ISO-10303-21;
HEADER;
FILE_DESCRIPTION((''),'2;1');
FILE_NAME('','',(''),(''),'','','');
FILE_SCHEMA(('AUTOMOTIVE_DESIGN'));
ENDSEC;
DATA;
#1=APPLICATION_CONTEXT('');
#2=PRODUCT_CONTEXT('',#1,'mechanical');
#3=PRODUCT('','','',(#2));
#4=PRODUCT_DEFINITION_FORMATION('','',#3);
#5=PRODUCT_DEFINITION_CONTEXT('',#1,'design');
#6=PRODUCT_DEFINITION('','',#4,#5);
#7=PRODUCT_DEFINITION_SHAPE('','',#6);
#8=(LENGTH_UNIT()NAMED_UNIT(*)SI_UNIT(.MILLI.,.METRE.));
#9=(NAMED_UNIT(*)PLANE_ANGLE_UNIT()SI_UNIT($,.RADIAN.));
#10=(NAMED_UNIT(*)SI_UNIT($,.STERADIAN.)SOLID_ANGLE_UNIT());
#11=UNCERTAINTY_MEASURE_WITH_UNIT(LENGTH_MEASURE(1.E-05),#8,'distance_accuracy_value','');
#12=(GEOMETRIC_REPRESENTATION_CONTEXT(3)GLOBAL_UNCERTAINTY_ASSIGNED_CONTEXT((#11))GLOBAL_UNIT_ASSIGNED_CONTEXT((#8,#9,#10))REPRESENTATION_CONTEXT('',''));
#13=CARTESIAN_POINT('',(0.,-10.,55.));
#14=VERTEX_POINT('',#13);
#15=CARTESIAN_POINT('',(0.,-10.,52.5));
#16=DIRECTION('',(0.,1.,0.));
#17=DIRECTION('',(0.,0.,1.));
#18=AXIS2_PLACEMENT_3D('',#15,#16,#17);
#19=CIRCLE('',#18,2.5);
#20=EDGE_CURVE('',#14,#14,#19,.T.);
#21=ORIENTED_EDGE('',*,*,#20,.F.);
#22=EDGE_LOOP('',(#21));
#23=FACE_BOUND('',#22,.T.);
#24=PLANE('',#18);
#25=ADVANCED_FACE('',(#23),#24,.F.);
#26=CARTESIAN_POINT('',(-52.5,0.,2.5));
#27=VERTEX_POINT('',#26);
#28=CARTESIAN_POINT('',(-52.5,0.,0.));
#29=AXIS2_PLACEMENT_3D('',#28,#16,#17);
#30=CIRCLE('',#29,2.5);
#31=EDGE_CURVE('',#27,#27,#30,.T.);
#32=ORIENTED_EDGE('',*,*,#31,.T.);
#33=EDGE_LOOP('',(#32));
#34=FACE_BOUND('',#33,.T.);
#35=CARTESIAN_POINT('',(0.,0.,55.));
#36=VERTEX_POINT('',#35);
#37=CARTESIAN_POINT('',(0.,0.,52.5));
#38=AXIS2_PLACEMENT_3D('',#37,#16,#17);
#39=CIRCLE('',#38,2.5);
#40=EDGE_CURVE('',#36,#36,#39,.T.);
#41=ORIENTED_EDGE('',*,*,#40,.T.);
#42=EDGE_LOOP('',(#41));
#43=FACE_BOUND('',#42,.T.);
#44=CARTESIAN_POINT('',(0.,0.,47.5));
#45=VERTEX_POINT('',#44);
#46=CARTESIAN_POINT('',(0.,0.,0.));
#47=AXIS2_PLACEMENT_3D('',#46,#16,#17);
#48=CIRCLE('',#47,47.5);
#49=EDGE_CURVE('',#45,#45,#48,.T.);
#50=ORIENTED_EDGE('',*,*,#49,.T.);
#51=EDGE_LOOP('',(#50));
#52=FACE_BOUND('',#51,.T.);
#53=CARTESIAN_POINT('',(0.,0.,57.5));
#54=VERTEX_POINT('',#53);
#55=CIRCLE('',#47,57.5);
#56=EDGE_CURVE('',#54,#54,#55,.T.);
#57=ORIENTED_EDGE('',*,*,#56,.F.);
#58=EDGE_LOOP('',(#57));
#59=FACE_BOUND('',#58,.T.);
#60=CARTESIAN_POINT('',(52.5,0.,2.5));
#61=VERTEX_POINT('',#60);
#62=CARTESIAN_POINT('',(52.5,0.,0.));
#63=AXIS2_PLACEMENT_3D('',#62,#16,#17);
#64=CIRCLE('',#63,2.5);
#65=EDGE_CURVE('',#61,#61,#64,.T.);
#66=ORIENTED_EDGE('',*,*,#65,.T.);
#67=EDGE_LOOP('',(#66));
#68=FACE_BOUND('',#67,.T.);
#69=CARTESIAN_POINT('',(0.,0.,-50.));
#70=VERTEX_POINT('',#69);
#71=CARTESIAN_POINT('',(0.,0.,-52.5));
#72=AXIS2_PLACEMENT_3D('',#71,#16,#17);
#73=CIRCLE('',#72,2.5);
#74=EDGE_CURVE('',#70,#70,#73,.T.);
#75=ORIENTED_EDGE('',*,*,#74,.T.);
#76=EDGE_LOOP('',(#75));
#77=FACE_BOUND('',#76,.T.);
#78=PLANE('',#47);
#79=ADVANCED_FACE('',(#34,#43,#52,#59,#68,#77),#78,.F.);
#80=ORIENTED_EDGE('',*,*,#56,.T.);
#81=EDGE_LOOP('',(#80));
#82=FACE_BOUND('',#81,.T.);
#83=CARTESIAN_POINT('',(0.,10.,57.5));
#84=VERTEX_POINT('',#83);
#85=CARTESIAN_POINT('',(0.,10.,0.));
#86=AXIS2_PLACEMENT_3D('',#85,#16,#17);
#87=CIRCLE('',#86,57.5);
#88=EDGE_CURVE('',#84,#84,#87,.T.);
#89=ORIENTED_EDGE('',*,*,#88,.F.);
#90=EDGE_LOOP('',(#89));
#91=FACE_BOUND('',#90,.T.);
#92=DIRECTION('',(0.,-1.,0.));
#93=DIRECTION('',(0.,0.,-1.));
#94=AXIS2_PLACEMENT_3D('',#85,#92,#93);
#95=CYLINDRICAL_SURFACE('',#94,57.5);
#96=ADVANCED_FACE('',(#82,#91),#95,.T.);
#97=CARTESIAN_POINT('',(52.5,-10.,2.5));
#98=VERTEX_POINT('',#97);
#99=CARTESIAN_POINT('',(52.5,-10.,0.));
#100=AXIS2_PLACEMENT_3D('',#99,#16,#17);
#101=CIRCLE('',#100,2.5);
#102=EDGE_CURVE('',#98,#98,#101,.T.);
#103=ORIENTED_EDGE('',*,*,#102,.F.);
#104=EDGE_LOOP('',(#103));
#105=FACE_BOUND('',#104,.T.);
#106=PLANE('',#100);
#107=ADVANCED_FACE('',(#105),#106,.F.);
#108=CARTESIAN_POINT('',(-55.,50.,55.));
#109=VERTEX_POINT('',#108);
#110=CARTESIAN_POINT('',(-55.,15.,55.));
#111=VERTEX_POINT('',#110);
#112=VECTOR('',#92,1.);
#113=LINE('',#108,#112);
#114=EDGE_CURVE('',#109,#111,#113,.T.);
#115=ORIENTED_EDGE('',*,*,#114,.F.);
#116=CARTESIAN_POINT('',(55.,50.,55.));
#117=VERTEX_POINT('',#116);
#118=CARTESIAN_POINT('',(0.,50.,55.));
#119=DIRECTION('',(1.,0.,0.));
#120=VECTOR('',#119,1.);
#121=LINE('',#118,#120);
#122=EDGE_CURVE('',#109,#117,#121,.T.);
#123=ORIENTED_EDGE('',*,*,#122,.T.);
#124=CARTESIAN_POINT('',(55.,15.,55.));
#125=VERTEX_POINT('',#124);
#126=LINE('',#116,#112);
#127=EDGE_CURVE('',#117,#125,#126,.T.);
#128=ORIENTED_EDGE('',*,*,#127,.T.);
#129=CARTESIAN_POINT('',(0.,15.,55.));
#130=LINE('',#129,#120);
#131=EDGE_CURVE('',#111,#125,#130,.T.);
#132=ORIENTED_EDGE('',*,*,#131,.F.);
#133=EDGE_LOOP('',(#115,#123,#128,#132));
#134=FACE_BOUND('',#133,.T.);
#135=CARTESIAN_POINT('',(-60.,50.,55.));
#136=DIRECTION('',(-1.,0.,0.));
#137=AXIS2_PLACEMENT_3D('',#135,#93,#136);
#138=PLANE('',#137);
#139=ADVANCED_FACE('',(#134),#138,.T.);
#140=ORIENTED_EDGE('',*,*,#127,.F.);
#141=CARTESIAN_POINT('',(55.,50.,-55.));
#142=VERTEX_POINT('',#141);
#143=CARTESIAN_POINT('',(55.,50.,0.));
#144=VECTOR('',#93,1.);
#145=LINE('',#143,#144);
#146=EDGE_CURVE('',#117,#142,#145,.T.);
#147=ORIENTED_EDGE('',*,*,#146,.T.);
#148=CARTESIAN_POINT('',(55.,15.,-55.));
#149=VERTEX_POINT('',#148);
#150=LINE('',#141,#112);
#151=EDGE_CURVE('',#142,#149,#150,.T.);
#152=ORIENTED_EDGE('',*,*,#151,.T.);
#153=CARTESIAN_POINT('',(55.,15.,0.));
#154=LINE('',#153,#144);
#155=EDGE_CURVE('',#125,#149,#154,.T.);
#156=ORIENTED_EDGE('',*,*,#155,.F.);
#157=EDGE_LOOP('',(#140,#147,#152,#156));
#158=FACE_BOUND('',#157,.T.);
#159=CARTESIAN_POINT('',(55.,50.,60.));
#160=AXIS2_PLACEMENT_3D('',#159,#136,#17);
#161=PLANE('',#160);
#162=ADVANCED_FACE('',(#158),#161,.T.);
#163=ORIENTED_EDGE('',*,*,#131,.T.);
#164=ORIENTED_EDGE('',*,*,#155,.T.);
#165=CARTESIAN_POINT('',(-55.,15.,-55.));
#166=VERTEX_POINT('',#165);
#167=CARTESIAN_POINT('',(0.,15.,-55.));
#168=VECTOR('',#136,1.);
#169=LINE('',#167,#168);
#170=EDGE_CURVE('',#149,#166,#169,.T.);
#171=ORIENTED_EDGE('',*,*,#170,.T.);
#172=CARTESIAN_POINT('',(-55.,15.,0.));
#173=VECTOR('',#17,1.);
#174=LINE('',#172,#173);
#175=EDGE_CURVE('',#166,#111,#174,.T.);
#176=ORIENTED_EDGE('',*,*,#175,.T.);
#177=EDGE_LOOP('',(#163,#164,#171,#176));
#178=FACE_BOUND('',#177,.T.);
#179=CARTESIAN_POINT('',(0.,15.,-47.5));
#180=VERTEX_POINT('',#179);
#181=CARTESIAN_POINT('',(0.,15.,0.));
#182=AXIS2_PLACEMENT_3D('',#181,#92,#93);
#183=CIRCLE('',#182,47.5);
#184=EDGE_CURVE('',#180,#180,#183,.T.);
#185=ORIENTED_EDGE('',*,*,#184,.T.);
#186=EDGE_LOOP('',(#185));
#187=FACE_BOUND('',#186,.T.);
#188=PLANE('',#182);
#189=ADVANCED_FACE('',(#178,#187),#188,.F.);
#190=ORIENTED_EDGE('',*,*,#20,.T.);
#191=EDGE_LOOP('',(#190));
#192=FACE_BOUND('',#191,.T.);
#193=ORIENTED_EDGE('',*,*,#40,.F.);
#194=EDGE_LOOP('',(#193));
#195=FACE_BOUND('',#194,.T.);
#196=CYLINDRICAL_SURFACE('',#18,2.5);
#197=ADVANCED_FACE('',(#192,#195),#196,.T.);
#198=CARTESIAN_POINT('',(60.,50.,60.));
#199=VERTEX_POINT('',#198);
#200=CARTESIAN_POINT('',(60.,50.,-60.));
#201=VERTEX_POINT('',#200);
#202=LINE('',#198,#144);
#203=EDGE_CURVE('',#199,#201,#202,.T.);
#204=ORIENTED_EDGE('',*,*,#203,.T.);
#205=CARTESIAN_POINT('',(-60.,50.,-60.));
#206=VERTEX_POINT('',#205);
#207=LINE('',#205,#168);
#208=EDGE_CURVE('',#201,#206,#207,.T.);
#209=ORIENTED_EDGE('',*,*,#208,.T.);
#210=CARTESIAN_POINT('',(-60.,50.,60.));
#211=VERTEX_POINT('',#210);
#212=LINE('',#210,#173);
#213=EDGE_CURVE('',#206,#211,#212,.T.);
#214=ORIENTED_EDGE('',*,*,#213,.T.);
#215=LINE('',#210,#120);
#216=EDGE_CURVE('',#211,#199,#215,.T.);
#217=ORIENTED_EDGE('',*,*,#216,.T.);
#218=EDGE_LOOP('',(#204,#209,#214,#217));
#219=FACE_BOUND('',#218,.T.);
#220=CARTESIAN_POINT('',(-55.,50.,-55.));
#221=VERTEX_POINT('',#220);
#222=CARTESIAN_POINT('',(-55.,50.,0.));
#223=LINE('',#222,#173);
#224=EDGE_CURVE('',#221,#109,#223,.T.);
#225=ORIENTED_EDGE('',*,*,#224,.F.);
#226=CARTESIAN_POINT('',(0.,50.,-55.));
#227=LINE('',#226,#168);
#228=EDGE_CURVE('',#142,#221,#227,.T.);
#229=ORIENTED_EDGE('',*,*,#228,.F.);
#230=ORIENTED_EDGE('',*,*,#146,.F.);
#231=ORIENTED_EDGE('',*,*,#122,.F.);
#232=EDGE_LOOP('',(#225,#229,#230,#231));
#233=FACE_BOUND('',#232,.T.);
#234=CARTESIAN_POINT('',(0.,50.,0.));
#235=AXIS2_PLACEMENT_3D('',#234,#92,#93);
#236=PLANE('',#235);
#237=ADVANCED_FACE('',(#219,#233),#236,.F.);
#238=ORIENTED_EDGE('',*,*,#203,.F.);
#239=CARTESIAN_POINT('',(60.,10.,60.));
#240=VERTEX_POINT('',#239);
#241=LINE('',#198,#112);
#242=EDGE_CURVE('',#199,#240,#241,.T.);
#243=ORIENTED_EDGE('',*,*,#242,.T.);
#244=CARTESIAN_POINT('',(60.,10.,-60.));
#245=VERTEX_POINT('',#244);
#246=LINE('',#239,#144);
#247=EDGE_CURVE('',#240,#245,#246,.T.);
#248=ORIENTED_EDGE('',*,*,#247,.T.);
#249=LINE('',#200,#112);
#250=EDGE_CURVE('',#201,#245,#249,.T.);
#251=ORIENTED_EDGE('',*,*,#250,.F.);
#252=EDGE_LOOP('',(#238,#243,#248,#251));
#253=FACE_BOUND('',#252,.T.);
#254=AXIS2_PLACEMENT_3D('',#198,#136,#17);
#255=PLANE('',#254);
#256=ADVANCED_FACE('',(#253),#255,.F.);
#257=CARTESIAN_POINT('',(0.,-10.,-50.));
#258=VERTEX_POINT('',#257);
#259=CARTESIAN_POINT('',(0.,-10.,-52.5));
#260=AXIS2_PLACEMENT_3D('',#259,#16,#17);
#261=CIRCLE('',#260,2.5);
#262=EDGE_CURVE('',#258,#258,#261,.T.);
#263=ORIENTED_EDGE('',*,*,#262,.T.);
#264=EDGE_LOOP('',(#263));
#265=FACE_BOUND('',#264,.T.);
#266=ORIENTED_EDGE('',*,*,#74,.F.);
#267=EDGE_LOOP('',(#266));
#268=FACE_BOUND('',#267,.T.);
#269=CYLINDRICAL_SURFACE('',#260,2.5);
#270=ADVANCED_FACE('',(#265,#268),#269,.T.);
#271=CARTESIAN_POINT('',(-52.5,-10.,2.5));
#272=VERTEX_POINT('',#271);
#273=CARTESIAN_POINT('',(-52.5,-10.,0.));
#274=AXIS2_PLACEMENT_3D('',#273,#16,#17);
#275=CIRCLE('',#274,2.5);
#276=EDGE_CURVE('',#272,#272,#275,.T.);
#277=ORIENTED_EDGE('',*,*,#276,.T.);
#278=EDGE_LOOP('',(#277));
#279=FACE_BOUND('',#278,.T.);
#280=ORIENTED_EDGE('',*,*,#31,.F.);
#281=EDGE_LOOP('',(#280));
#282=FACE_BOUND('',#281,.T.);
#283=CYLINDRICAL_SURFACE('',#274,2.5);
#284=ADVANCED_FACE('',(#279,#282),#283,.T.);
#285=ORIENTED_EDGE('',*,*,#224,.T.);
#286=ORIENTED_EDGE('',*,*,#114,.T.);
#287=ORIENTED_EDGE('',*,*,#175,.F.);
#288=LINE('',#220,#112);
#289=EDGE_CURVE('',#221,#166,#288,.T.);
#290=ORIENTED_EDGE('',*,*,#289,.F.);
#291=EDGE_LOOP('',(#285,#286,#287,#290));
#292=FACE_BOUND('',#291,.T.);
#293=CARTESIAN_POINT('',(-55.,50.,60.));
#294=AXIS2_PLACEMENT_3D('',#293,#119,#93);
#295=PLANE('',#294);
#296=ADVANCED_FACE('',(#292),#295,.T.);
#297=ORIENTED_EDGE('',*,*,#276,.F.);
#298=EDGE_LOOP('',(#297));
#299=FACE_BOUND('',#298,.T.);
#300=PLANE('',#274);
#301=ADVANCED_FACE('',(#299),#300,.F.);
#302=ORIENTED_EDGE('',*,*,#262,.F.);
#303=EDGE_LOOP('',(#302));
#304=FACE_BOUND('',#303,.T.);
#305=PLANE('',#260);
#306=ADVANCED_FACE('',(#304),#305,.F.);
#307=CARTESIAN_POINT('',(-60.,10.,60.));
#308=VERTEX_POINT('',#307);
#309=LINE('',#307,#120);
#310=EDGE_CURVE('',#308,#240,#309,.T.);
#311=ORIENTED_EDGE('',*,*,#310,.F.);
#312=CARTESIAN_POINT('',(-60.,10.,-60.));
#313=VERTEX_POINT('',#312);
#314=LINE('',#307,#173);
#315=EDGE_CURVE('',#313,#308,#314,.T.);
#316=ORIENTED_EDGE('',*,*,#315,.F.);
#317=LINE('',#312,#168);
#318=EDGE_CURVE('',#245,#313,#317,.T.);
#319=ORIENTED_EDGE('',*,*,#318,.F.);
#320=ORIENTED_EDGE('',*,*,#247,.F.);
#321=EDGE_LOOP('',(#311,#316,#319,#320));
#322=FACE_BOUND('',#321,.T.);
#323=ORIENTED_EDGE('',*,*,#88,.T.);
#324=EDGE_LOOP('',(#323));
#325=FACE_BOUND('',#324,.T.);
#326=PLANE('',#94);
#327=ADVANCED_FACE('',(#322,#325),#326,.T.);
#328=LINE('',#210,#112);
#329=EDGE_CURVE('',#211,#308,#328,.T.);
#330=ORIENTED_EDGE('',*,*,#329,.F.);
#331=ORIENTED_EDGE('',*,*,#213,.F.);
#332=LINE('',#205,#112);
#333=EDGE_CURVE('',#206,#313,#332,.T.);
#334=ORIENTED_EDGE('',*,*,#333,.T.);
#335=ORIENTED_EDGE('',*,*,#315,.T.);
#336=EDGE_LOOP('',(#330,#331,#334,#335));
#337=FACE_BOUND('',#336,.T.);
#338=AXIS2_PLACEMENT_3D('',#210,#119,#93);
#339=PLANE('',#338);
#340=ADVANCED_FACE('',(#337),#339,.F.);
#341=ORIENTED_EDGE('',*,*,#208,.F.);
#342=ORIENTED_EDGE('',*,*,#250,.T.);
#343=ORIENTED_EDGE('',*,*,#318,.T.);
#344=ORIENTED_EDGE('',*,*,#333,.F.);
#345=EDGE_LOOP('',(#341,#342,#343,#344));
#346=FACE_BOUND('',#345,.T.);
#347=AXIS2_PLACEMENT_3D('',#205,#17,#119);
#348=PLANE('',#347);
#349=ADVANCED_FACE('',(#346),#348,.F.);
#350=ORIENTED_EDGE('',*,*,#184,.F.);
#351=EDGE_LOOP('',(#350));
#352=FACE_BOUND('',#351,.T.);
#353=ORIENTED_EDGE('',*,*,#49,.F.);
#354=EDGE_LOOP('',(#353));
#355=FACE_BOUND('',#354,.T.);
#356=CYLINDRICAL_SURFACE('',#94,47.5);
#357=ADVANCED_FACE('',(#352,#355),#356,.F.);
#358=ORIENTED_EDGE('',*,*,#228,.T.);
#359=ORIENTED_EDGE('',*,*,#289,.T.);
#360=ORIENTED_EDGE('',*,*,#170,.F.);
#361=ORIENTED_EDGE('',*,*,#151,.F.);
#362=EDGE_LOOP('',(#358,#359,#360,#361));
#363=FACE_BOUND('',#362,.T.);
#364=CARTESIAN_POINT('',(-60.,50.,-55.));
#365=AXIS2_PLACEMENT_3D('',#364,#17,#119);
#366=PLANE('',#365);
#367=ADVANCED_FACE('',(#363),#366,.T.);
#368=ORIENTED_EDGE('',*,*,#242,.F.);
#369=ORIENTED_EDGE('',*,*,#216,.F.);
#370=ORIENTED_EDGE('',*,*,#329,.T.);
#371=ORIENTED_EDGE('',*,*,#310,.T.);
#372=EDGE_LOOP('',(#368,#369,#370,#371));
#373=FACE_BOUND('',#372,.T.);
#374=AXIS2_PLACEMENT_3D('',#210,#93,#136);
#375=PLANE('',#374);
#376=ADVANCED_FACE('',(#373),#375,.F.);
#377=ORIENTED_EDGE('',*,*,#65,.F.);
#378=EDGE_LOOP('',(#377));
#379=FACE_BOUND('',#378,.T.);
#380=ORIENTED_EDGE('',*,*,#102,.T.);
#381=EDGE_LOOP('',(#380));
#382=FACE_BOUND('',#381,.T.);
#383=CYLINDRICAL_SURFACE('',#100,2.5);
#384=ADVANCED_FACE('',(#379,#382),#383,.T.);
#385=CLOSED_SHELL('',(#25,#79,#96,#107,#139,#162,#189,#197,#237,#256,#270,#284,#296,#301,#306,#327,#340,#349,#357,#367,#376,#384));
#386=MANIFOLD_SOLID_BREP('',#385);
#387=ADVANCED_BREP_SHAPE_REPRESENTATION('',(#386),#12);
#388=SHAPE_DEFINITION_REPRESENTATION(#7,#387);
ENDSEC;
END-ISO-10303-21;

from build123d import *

# Parameters (mm, degrees)
ESQUISSE1_R             = 57.5
ESQUISSE1_R_2           = 47.5
BOSS_EXTRU_1_DEPTH      = 10
ESQUISSE3_R             = 2.5
BOSS_EXTRU_2_DEPTH      = 10
ESQUISSE10_W            = 120
ESQUISSE10_H            = 120
BOSS_EXTRU_3_DEPTH      = 40
COQUE1_START            = 15
COQUE1_OUTLINE_W        = 110
COQUE1_OUTLINE_H        = 110
COQUE1_DEPTH            = 35
ESQUISSE14_R            = 47.5
ENL_V_MAT_EXTRU_1_DEPTH = 40


# Read off the part's stored shape, not the designer's step: Coque1
with BuildPart() as part:
    # Esquisse1 → Boss.-Extru.1 (new body)
    with BuildSketch(Plane(origin=(0, 0, 0), x_dir=(1, 0, 0), z_dir=(0, 1, 0))):
        with Locations(Location((0, 0, 0), (0, 0, 270))):
            Circle(ESQUISSE1_R)
        with Locations(Location((0, 0, 0), (0, 0, 270))):
            Circle(ESQUISSE1_R_2, mode=Mode.SUBTRACT)
    extrude(amount=BOSS_EXTRU_1_DEPTH)

    # Esquisse3 → Boss.-Extru.2 (add)
    with BuildSketch(Plane(origin=(0, 0, 0), x_dir=(1, 0, 0), z_dir=(0, 1, 0))):
        with Locations(Location((0, 52.5, 0), (0, 0, 270))):
            Circle(ESQUISSE3_R)
        with Locations(Location((0, -52.5, 0), (0, 0, 270))):
            Circle(ESQUISSE3_R)
        with Locations(Location((52.5, 0, 0), (0, 0, 270))):
            Circle(ESQUISSE3_R)
        with Locations(Location((-52.5, 0, 0), (0, 0, 270))):
            Circle(ESQUISSE3_R)
    extrude(amount=-BOSS_EXTRU_2_DEPTH)

    # Esquisse10 → Boss.-Extru.3 (add)
    with BuildSketch(Plane(origin=(0, 10, 0), x_dir=(1, 0, 0), z_dir=(0, 1, 0))):
        Rectangle(ESQUISSE10_W, ESQUISSE10_H)
    extrude(amount=BOSS_EXTRU_3_DEPTH)

    # Coque1 outline → Coque1 (cut)
    with BuildSketch(Plane(origin=(0, 0, 0), x_dir=(1, 0, 0), z_dir=(0, 1, 0)).offset(COQUE1_START)):
        Rectangle(COQUE1_OUTLINE_W, COQUE1_OUTLINE_H)
    extrude(amount=COQUE1_DEPTH, mode=Mode.SUBTRACT)

    # Esquisse14 → Enlèv. mat.-Extru.1 (cut)
    with BuildSketch(Plane.XZ.offset(-10)):
        with Locations(Location((0, 0, 0), (0, 0, 270))):
            Circle(ESQUISSE14_R)
    extrude(amount=-ENL_V_MAT_EXTRU_1_DEPTH, mode=Mode.SUBTRACT)


solid = part.part
